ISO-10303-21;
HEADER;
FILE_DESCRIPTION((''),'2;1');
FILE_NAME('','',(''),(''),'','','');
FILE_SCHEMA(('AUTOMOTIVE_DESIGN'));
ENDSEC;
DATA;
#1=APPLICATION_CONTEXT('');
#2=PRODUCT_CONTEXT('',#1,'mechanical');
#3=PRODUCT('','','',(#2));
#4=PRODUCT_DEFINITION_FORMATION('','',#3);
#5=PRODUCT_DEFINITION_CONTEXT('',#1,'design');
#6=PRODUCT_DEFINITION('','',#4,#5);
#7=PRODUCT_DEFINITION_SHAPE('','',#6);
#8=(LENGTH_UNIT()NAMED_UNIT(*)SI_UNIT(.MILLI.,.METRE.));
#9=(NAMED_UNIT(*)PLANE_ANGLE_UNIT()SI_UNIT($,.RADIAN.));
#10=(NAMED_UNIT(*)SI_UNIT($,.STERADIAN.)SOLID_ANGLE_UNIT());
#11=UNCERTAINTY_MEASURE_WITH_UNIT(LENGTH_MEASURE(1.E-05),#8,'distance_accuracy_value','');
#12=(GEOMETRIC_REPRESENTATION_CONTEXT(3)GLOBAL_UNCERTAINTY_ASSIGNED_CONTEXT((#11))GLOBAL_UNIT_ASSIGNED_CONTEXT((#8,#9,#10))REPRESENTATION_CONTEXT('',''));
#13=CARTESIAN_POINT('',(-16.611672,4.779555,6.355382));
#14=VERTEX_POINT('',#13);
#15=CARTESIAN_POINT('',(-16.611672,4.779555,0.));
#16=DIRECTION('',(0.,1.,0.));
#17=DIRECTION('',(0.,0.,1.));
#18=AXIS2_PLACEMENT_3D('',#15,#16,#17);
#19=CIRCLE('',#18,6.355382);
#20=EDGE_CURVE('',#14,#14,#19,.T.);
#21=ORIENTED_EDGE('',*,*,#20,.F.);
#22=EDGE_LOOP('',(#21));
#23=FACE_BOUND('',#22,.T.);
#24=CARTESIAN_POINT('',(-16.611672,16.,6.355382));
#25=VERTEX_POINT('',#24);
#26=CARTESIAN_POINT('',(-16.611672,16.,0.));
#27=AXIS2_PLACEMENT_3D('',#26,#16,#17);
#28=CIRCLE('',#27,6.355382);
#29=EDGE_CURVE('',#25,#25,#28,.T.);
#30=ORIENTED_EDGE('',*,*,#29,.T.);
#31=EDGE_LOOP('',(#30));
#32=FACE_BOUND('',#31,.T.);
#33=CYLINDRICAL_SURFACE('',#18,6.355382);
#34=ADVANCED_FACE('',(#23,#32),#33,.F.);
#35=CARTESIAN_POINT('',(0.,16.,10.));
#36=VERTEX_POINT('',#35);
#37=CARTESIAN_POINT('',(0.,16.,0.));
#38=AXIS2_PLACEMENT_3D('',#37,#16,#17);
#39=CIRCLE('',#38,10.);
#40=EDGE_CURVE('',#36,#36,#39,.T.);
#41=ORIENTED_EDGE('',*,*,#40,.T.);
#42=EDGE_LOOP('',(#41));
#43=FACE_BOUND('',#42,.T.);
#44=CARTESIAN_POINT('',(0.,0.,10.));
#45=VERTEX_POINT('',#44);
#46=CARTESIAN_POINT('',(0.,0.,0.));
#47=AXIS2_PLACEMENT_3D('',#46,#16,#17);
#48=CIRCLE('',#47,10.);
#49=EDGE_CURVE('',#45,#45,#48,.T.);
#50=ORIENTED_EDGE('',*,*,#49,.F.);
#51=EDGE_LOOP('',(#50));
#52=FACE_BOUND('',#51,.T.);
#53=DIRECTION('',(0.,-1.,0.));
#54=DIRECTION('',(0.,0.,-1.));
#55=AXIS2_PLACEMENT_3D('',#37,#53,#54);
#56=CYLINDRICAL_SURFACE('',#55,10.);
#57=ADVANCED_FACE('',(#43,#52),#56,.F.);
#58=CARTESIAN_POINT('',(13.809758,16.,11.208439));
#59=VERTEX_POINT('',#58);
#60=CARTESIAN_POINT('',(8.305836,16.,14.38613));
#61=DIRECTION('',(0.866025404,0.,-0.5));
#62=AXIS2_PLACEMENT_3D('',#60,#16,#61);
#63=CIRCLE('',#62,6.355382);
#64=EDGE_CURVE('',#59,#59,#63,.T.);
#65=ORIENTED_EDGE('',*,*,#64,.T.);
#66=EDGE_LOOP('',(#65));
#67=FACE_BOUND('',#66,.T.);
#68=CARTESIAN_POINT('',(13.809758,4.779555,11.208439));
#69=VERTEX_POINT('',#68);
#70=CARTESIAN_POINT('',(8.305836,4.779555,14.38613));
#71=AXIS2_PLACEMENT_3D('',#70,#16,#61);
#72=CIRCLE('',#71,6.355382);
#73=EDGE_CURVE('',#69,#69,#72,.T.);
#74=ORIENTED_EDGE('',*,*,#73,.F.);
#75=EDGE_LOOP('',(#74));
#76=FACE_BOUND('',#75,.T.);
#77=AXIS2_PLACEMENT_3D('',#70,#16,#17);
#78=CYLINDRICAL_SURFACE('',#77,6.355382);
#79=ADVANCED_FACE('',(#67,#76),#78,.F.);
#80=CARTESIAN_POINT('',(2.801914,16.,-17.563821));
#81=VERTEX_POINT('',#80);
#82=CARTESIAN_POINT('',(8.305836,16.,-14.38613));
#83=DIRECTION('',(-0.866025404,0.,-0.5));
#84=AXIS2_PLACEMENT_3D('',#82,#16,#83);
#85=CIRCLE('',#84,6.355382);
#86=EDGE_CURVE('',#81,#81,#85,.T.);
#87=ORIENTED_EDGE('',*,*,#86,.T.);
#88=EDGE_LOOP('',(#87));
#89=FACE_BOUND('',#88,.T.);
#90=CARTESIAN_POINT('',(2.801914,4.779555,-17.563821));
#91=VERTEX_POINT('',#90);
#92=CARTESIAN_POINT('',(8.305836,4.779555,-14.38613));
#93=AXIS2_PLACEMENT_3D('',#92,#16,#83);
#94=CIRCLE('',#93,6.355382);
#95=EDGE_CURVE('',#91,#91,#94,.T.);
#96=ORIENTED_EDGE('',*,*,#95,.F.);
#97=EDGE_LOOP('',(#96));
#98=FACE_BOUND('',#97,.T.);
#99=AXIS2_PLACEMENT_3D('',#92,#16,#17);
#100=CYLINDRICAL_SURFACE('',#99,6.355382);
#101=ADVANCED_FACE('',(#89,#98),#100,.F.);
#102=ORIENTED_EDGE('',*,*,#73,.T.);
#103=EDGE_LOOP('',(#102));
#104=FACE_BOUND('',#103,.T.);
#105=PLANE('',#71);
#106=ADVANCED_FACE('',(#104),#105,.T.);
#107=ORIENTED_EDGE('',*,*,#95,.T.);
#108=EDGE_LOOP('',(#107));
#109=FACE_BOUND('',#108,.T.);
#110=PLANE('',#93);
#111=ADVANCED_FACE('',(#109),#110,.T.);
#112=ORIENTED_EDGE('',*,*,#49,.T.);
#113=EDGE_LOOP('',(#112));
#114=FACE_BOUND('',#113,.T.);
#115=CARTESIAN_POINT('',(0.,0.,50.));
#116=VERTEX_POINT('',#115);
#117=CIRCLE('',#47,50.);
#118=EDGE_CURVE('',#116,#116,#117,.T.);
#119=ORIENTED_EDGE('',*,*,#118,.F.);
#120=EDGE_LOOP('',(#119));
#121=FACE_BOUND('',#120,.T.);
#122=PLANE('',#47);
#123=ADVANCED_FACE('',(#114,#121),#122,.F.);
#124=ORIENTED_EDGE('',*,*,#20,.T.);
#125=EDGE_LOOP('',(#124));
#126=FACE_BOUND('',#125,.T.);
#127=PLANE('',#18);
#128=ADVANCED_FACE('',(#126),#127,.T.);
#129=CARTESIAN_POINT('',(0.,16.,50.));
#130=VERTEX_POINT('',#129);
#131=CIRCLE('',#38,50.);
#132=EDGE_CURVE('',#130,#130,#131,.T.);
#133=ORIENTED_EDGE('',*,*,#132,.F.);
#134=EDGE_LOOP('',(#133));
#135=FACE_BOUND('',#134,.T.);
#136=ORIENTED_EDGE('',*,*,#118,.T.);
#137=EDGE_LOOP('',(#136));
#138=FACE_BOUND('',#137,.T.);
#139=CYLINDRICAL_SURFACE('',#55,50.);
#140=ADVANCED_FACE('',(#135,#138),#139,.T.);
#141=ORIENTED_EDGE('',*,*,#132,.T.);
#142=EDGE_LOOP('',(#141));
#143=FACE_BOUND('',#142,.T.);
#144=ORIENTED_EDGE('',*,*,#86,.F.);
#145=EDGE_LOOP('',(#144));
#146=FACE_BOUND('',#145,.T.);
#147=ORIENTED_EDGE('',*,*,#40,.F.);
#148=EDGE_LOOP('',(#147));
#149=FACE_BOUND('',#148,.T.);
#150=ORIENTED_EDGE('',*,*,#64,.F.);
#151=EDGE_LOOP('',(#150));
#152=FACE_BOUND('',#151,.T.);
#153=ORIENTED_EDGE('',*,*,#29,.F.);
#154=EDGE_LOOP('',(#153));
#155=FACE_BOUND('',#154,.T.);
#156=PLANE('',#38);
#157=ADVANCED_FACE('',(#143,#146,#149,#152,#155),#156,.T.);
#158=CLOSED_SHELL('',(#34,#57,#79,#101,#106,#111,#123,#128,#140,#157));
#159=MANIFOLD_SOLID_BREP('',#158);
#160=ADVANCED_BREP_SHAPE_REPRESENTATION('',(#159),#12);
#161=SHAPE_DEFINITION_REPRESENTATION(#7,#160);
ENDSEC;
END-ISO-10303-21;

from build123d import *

# Parameters (mm, degrees)
SKETCH1_R           = 50
BOSS_EXTRUDE1_DEPTH = 16
SKETCH2_R           = 10
CUT_EXTRUDE1_DEPTH  = 73.498275842
SKETCH3_R           = 6.355381528
CUT_EXTRUDE2_DEPTH  = 11.22044528
CIRPATTERN1_COUNT   = 3


with BuildPart() as part:
    # Sketch1 → Boss-Extrude1 (new body)
    with BuildSketch(Plane(origin=(0, 0, 0), x_dir=(1, 0, 0), z_dir=(0, 1, 0))):
        Circle(SKETCH1_R)
    extrude(amount=BOSS_EXTRUDE1_DEPTH)

    # Sketch2 → Cut-Extrude1 (cut, through all)
    with BuildSketch(Plane(origin=(0, 0, 0), x_dir=(1, 0, 0), z_dir=(0, 1, 0))):
        Circle(SKETCH2_R)
    extrude(amount=CUT_EXTRUDE1_DEPTH, mode=Mode.SUBTRACT)

    # Sketch3 → Cut-Extrude2 (cut)
    with BuildSketch(Plane(origin=(0, 16, 0), x_dir=(1, 0, 0), z_dir=(0, 1, 0))):
        with Locations((-16.611671849, 0)):
            Circle(SKETCH3_R)
    cut_extrude2 = extrude(amount=-CUT_EXTRUDE2_DEPTH, mode=Mode.SUBTRACT)

    # CirPattern1: Cut-Extrude2 ×3 about axis
    cirpattern1_axis = Axis((0, 0, 0), (0, 1, 0))
    for i in range(1, CIRPATTERN1_COUNT):
        add(cut_extrude2.rotate(cirpattern1_axis, i * 360 / CIRPATTERN1_COUNT), mode=Mode.SUBTRACT)


solid = part.part
